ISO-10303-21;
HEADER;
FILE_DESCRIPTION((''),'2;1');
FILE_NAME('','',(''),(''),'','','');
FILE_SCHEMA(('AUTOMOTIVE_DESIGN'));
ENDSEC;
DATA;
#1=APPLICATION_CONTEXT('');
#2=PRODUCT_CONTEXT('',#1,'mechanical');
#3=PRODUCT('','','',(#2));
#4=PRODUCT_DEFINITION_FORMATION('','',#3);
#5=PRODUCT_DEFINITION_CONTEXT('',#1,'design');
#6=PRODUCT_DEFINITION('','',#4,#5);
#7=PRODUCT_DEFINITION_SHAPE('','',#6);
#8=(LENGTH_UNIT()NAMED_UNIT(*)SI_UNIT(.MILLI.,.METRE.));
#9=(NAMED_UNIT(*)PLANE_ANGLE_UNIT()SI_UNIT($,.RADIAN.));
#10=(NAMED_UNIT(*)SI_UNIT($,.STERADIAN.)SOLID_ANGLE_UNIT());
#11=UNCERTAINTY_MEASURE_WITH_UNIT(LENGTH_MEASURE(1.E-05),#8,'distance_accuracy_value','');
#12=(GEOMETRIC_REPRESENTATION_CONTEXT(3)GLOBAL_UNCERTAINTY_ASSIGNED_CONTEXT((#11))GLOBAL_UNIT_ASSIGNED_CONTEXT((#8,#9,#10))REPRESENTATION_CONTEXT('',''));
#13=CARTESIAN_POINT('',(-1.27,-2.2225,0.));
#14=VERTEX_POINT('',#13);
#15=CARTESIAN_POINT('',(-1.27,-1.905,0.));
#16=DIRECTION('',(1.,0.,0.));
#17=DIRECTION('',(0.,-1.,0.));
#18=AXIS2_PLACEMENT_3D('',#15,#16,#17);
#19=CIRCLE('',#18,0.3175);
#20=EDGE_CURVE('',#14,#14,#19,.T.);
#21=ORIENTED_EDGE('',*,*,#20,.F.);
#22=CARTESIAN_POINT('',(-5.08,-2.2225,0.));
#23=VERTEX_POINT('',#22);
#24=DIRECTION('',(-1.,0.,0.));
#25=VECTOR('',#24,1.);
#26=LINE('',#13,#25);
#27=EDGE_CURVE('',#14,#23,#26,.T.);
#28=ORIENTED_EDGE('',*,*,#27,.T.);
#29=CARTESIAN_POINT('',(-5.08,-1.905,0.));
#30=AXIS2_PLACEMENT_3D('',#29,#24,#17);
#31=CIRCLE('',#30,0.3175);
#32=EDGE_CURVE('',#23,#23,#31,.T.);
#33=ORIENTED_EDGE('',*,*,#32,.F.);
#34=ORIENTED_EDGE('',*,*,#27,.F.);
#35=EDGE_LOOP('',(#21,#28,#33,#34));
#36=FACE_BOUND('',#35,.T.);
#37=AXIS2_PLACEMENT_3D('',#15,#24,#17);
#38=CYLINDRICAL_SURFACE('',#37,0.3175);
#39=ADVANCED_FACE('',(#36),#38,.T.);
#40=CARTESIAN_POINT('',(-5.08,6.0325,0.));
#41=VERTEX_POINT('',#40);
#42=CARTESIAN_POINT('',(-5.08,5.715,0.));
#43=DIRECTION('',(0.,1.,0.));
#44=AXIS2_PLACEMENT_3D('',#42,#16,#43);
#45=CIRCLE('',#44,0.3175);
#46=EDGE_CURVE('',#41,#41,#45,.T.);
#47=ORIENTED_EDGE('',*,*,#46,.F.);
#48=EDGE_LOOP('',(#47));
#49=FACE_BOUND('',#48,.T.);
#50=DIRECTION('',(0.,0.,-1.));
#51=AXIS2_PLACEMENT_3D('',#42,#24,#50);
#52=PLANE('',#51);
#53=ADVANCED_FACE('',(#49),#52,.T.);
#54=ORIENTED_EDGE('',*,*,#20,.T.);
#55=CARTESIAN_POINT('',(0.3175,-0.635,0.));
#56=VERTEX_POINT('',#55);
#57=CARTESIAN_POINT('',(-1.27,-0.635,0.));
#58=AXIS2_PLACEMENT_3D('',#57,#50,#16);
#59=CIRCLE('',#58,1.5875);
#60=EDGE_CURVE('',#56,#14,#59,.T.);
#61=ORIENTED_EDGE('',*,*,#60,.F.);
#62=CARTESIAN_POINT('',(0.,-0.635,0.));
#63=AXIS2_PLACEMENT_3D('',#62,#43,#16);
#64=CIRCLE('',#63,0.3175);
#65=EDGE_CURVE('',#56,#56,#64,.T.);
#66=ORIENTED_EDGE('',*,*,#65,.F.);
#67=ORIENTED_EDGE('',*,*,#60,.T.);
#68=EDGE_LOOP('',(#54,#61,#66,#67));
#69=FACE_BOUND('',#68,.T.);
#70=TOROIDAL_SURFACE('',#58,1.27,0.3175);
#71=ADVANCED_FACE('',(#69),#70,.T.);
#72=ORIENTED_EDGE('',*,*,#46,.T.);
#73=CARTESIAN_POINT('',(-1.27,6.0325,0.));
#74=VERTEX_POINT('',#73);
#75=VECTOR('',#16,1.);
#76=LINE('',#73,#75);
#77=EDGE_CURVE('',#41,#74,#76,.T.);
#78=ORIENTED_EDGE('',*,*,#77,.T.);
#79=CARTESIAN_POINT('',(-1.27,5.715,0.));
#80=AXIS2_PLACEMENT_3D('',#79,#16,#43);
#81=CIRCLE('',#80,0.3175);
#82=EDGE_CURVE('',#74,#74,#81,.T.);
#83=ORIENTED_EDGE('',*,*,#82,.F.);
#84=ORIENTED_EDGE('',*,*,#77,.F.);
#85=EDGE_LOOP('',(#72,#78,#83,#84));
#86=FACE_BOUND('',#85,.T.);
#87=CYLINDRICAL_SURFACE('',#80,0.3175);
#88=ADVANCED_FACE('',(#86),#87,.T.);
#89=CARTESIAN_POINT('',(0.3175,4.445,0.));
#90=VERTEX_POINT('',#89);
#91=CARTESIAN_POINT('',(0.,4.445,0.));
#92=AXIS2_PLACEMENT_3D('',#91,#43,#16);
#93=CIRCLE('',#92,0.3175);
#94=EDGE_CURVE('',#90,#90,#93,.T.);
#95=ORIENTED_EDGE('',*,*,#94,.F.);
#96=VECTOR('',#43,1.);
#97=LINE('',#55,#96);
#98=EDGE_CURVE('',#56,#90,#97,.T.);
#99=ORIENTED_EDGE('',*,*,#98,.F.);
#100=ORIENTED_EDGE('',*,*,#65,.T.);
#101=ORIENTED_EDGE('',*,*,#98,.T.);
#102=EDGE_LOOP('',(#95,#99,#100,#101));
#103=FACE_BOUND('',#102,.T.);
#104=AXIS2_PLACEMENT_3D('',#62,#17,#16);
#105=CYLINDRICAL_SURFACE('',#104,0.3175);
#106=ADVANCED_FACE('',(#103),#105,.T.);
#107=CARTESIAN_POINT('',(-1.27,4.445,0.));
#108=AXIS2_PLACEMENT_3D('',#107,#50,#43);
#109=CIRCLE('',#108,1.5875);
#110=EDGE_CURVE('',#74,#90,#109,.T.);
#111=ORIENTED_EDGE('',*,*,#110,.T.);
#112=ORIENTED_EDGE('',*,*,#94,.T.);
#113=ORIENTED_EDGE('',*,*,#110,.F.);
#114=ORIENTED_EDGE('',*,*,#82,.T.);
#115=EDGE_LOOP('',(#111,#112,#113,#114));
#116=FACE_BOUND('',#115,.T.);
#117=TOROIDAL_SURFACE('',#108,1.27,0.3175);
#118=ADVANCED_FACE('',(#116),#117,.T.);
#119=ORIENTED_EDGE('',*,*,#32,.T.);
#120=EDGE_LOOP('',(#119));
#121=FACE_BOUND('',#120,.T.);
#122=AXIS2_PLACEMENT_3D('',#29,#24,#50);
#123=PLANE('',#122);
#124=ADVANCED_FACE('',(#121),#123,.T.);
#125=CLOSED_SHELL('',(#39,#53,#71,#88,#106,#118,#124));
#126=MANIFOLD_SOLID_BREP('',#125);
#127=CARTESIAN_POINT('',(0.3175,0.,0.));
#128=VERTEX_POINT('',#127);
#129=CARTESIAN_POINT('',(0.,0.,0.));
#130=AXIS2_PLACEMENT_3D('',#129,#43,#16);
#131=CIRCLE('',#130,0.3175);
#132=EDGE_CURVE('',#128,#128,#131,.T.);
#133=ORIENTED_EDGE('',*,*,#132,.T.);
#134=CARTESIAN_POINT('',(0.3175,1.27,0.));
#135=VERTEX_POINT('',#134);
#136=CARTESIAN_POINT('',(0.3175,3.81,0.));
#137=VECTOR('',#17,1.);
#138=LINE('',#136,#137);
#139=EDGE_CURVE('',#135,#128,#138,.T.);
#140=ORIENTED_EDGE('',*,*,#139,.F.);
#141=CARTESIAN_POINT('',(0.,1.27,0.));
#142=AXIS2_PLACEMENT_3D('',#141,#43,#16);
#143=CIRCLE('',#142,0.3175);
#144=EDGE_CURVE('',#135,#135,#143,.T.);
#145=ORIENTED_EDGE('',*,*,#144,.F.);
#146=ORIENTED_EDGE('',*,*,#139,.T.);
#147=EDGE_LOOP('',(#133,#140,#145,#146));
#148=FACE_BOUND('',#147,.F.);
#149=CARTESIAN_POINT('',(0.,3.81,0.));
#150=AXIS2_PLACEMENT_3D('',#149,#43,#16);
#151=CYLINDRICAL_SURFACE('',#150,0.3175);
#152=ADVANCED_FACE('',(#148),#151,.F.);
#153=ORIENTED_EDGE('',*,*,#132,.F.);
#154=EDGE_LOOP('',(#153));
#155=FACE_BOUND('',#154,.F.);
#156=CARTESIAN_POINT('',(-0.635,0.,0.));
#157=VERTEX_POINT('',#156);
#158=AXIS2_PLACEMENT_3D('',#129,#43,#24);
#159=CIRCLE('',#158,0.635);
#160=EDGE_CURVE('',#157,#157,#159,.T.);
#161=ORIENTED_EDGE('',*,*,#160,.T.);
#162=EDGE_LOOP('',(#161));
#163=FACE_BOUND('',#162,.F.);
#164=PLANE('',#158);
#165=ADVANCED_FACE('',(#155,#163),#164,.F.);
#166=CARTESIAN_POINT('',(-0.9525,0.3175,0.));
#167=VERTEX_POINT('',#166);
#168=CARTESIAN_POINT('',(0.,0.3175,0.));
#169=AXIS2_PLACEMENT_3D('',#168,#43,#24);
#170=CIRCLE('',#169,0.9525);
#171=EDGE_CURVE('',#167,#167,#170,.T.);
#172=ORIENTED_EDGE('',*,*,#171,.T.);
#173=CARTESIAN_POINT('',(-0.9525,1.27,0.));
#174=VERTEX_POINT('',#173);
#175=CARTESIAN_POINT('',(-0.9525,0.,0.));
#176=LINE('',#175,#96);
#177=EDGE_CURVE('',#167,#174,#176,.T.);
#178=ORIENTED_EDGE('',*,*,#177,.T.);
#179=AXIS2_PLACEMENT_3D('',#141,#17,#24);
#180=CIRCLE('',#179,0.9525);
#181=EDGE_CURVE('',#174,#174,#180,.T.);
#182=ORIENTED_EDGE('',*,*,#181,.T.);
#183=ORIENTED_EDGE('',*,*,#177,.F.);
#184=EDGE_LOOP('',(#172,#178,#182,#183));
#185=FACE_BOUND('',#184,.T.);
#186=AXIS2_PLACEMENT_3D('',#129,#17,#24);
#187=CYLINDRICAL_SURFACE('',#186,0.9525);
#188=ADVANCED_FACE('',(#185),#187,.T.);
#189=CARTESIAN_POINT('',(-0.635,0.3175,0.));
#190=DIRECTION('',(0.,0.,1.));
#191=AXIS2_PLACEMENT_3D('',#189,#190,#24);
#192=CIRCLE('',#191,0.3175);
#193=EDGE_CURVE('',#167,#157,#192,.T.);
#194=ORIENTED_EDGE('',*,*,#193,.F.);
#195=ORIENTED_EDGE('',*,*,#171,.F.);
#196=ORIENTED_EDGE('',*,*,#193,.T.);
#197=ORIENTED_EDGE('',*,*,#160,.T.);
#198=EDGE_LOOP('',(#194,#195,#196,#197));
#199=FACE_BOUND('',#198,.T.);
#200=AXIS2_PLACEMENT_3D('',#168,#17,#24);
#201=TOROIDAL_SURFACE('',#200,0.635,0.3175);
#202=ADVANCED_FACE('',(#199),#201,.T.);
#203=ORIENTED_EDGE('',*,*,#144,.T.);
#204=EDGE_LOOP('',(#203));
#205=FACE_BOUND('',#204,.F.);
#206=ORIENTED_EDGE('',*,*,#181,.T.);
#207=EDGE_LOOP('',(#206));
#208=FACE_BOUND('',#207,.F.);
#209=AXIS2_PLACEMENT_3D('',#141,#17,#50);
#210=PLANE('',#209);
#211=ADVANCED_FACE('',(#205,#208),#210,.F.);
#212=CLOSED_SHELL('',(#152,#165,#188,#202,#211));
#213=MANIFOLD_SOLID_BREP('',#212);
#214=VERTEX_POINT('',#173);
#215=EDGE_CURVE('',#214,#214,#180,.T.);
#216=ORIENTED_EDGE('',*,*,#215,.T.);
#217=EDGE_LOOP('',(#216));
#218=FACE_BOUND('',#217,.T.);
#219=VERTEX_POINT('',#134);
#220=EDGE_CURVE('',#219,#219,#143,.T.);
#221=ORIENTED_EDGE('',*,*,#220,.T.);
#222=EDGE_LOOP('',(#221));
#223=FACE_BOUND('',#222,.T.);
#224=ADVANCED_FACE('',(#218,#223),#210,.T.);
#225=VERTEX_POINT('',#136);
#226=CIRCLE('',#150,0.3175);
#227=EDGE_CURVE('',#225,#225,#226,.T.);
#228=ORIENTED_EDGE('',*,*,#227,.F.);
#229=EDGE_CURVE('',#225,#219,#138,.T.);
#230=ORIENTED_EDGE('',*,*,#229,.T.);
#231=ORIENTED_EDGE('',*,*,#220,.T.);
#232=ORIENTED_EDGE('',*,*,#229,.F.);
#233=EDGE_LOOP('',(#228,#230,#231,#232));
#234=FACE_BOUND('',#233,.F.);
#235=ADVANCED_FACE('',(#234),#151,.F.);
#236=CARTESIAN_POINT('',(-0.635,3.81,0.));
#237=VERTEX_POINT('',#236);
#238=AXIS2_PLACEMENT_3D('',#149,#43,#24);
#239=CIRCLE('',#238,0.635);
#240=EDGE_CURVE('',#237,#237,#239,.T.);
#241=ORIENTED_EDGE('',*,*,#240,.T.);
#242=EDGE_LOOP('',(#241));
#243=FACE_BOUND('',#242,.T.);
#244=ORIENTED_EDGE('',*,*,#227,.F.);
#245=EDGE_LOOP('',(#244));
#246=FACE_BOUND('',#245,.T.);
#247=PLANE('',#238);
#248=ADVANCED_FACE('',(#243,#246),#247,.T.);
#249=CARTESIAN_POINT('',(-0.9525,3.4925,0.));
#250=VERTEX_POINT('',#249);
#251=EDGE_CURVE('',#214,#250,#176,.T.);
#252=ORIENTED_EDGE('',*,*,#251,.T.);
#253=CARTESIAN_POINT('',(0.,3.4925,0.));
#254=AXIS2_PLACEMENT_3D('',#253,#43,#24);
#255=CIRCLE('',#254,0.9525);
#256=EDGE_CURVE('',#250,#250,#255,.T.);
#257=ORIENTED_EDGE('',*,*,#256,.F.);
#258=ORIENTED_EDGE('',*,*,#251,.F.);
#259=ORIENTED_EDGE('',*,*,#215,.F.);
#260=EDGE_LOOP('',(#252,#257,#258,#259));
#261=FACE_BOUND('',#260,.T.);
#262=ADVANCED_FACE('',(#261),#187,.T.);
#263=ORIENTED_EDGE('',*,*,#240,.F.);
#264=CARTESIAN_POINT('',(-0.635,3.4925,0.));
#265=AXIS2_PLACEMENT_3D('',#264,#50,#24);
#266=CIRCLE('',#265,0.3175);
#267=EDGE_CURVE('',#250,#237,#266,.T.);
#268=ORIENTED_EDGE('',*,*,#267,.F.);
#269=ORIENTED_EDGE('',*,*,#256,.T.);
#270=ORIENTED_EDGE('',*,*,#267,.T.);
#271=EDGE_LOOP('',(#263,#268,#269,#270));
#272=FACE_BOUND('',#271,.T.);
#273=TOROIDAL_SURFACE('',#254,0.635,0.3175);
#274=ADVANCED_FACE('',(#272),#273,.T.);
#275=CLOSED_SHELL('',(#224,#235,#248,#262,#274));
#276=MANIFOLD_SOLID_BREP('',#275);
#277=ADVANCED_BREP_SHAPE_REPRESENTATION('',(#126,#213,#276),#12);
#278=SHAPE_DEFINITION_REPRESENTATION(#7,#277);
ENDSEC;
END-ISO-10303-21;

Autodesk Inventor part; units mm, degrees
sketch "Náčrt1" plane through (0, 0, 0) normal (0, 1, 0) x (-1, 0, 0)
  circle A0 centre (0, 0) radius 0.9525
  dimension "d0" = 1.905
extrude "Vysunutí1" add sketch "Náčrt1" along normal blind 3.81
fillet "Zaoblení1" radius 0.3175 2 edges at (0.9525, 3.81, 0) (0.9525, 0, 0)
ref_plane "Pracovní rovina1" through (0, 1.27, 0) normal (0, -1, 0) x (1, 0, 0)
sketch "Náčrt2" plane through (0, 3.81, 0) normal (0, 1, 0) x (1, 0, 0)
  circle A0 centre (0, 0) radius 0.635 projected
  circle A1 centre (0, 0) radius 0.3175
  dimension "d5" = 0.635
extrude "Vysunutí2" cut sketch "Náčrt2" against normal up to next contours A1
split body "Rozdělit1" result two bodies by plane through (0, 1.27, 0) normal (0, -1, 0) first body at (-0.4466, 0.9525, 0.0726)
sketch "Náčrt3" plane through (0, 3.81, 0) normal (0, 1, 0) x (1, 0, 0)
  circle A0 centre (0, 0) radius 0.3175 projected
extrude "Vysunutí3" add sketch "Náčrt3" along normal blind 5.08 bodies 3
ref_plane "Pracovní rovina2" through (0, 3.81, 0) normal (0, 1, 0) x (1, 0, 0)
split body "Rozdělit2" result two bodies by plane through (0, 3.81, 0) normal (0, 1, 0) bodies 3 first body at (-0.1819, 7.1967, -0.0147)
move or copy body "Posunout těleso1" bodies to move or copy 4 copy no translate (0, -4.445, 0)
ref_plane "Pracovní rovina3" through (0.3175, 4.445, 0) normal (0, 0, -1) x (-1, 0, 0)
sketch "Náčrt5" plane through (0.3175, 4.445, 0) normal (0, 0, -1) x (-1, 0, 0)
  line L0 (0.635, 0) -> (0, 0) projected
  line L1 (1.5875, 1.27) -> (5.3975, 1.27)
  line L2 (0, -5.08) -> (0.635, -5.08) projected
  line L3 (1.5875, -6.35) -> (5.3975, -6.35)
  arc A0 (1.5875, 1.27) -> (0.3175, 0) centre (1.5875, 0) ccw
  line L4 (0.3175, 0) -> (1.5875, 1.27) construction
  line L5 (0.3175, 0) -> (2.1136, 0) construction
  arc A1 (0.3175, -5.08) -> (1.5875, -6.35) centre (1.5875, -5.08) ccw
  point P0 (0.3175, -4.445)
  dimension "d18" = 45
  dimension "d19" = 1.27
  dimension "d20" = 1.27
sketch "Náčrt6" plane through (0, -0.635, 0) normal (0, -1, 0) x (1, 0, 0)
  circle A0 centre (0, 0) radius 0.3175 projected
sketch "Náčrt7" plane through (0, 4.445, 0) normal (0, 1, 0) x (1, 0, 0)
  circle A0 centre (0, 0) radius 0.3175 projected
sweep "Tažení1" add profiles "Náčrt7" path "Náčrt5" bodies 4 path curves A0 L1
sweep "Tažení2" add profiles "Náčrt6" path "Náčrt5" bodies 4 path curves A1 L3
properties part number "Diode" material "SAN plast"
